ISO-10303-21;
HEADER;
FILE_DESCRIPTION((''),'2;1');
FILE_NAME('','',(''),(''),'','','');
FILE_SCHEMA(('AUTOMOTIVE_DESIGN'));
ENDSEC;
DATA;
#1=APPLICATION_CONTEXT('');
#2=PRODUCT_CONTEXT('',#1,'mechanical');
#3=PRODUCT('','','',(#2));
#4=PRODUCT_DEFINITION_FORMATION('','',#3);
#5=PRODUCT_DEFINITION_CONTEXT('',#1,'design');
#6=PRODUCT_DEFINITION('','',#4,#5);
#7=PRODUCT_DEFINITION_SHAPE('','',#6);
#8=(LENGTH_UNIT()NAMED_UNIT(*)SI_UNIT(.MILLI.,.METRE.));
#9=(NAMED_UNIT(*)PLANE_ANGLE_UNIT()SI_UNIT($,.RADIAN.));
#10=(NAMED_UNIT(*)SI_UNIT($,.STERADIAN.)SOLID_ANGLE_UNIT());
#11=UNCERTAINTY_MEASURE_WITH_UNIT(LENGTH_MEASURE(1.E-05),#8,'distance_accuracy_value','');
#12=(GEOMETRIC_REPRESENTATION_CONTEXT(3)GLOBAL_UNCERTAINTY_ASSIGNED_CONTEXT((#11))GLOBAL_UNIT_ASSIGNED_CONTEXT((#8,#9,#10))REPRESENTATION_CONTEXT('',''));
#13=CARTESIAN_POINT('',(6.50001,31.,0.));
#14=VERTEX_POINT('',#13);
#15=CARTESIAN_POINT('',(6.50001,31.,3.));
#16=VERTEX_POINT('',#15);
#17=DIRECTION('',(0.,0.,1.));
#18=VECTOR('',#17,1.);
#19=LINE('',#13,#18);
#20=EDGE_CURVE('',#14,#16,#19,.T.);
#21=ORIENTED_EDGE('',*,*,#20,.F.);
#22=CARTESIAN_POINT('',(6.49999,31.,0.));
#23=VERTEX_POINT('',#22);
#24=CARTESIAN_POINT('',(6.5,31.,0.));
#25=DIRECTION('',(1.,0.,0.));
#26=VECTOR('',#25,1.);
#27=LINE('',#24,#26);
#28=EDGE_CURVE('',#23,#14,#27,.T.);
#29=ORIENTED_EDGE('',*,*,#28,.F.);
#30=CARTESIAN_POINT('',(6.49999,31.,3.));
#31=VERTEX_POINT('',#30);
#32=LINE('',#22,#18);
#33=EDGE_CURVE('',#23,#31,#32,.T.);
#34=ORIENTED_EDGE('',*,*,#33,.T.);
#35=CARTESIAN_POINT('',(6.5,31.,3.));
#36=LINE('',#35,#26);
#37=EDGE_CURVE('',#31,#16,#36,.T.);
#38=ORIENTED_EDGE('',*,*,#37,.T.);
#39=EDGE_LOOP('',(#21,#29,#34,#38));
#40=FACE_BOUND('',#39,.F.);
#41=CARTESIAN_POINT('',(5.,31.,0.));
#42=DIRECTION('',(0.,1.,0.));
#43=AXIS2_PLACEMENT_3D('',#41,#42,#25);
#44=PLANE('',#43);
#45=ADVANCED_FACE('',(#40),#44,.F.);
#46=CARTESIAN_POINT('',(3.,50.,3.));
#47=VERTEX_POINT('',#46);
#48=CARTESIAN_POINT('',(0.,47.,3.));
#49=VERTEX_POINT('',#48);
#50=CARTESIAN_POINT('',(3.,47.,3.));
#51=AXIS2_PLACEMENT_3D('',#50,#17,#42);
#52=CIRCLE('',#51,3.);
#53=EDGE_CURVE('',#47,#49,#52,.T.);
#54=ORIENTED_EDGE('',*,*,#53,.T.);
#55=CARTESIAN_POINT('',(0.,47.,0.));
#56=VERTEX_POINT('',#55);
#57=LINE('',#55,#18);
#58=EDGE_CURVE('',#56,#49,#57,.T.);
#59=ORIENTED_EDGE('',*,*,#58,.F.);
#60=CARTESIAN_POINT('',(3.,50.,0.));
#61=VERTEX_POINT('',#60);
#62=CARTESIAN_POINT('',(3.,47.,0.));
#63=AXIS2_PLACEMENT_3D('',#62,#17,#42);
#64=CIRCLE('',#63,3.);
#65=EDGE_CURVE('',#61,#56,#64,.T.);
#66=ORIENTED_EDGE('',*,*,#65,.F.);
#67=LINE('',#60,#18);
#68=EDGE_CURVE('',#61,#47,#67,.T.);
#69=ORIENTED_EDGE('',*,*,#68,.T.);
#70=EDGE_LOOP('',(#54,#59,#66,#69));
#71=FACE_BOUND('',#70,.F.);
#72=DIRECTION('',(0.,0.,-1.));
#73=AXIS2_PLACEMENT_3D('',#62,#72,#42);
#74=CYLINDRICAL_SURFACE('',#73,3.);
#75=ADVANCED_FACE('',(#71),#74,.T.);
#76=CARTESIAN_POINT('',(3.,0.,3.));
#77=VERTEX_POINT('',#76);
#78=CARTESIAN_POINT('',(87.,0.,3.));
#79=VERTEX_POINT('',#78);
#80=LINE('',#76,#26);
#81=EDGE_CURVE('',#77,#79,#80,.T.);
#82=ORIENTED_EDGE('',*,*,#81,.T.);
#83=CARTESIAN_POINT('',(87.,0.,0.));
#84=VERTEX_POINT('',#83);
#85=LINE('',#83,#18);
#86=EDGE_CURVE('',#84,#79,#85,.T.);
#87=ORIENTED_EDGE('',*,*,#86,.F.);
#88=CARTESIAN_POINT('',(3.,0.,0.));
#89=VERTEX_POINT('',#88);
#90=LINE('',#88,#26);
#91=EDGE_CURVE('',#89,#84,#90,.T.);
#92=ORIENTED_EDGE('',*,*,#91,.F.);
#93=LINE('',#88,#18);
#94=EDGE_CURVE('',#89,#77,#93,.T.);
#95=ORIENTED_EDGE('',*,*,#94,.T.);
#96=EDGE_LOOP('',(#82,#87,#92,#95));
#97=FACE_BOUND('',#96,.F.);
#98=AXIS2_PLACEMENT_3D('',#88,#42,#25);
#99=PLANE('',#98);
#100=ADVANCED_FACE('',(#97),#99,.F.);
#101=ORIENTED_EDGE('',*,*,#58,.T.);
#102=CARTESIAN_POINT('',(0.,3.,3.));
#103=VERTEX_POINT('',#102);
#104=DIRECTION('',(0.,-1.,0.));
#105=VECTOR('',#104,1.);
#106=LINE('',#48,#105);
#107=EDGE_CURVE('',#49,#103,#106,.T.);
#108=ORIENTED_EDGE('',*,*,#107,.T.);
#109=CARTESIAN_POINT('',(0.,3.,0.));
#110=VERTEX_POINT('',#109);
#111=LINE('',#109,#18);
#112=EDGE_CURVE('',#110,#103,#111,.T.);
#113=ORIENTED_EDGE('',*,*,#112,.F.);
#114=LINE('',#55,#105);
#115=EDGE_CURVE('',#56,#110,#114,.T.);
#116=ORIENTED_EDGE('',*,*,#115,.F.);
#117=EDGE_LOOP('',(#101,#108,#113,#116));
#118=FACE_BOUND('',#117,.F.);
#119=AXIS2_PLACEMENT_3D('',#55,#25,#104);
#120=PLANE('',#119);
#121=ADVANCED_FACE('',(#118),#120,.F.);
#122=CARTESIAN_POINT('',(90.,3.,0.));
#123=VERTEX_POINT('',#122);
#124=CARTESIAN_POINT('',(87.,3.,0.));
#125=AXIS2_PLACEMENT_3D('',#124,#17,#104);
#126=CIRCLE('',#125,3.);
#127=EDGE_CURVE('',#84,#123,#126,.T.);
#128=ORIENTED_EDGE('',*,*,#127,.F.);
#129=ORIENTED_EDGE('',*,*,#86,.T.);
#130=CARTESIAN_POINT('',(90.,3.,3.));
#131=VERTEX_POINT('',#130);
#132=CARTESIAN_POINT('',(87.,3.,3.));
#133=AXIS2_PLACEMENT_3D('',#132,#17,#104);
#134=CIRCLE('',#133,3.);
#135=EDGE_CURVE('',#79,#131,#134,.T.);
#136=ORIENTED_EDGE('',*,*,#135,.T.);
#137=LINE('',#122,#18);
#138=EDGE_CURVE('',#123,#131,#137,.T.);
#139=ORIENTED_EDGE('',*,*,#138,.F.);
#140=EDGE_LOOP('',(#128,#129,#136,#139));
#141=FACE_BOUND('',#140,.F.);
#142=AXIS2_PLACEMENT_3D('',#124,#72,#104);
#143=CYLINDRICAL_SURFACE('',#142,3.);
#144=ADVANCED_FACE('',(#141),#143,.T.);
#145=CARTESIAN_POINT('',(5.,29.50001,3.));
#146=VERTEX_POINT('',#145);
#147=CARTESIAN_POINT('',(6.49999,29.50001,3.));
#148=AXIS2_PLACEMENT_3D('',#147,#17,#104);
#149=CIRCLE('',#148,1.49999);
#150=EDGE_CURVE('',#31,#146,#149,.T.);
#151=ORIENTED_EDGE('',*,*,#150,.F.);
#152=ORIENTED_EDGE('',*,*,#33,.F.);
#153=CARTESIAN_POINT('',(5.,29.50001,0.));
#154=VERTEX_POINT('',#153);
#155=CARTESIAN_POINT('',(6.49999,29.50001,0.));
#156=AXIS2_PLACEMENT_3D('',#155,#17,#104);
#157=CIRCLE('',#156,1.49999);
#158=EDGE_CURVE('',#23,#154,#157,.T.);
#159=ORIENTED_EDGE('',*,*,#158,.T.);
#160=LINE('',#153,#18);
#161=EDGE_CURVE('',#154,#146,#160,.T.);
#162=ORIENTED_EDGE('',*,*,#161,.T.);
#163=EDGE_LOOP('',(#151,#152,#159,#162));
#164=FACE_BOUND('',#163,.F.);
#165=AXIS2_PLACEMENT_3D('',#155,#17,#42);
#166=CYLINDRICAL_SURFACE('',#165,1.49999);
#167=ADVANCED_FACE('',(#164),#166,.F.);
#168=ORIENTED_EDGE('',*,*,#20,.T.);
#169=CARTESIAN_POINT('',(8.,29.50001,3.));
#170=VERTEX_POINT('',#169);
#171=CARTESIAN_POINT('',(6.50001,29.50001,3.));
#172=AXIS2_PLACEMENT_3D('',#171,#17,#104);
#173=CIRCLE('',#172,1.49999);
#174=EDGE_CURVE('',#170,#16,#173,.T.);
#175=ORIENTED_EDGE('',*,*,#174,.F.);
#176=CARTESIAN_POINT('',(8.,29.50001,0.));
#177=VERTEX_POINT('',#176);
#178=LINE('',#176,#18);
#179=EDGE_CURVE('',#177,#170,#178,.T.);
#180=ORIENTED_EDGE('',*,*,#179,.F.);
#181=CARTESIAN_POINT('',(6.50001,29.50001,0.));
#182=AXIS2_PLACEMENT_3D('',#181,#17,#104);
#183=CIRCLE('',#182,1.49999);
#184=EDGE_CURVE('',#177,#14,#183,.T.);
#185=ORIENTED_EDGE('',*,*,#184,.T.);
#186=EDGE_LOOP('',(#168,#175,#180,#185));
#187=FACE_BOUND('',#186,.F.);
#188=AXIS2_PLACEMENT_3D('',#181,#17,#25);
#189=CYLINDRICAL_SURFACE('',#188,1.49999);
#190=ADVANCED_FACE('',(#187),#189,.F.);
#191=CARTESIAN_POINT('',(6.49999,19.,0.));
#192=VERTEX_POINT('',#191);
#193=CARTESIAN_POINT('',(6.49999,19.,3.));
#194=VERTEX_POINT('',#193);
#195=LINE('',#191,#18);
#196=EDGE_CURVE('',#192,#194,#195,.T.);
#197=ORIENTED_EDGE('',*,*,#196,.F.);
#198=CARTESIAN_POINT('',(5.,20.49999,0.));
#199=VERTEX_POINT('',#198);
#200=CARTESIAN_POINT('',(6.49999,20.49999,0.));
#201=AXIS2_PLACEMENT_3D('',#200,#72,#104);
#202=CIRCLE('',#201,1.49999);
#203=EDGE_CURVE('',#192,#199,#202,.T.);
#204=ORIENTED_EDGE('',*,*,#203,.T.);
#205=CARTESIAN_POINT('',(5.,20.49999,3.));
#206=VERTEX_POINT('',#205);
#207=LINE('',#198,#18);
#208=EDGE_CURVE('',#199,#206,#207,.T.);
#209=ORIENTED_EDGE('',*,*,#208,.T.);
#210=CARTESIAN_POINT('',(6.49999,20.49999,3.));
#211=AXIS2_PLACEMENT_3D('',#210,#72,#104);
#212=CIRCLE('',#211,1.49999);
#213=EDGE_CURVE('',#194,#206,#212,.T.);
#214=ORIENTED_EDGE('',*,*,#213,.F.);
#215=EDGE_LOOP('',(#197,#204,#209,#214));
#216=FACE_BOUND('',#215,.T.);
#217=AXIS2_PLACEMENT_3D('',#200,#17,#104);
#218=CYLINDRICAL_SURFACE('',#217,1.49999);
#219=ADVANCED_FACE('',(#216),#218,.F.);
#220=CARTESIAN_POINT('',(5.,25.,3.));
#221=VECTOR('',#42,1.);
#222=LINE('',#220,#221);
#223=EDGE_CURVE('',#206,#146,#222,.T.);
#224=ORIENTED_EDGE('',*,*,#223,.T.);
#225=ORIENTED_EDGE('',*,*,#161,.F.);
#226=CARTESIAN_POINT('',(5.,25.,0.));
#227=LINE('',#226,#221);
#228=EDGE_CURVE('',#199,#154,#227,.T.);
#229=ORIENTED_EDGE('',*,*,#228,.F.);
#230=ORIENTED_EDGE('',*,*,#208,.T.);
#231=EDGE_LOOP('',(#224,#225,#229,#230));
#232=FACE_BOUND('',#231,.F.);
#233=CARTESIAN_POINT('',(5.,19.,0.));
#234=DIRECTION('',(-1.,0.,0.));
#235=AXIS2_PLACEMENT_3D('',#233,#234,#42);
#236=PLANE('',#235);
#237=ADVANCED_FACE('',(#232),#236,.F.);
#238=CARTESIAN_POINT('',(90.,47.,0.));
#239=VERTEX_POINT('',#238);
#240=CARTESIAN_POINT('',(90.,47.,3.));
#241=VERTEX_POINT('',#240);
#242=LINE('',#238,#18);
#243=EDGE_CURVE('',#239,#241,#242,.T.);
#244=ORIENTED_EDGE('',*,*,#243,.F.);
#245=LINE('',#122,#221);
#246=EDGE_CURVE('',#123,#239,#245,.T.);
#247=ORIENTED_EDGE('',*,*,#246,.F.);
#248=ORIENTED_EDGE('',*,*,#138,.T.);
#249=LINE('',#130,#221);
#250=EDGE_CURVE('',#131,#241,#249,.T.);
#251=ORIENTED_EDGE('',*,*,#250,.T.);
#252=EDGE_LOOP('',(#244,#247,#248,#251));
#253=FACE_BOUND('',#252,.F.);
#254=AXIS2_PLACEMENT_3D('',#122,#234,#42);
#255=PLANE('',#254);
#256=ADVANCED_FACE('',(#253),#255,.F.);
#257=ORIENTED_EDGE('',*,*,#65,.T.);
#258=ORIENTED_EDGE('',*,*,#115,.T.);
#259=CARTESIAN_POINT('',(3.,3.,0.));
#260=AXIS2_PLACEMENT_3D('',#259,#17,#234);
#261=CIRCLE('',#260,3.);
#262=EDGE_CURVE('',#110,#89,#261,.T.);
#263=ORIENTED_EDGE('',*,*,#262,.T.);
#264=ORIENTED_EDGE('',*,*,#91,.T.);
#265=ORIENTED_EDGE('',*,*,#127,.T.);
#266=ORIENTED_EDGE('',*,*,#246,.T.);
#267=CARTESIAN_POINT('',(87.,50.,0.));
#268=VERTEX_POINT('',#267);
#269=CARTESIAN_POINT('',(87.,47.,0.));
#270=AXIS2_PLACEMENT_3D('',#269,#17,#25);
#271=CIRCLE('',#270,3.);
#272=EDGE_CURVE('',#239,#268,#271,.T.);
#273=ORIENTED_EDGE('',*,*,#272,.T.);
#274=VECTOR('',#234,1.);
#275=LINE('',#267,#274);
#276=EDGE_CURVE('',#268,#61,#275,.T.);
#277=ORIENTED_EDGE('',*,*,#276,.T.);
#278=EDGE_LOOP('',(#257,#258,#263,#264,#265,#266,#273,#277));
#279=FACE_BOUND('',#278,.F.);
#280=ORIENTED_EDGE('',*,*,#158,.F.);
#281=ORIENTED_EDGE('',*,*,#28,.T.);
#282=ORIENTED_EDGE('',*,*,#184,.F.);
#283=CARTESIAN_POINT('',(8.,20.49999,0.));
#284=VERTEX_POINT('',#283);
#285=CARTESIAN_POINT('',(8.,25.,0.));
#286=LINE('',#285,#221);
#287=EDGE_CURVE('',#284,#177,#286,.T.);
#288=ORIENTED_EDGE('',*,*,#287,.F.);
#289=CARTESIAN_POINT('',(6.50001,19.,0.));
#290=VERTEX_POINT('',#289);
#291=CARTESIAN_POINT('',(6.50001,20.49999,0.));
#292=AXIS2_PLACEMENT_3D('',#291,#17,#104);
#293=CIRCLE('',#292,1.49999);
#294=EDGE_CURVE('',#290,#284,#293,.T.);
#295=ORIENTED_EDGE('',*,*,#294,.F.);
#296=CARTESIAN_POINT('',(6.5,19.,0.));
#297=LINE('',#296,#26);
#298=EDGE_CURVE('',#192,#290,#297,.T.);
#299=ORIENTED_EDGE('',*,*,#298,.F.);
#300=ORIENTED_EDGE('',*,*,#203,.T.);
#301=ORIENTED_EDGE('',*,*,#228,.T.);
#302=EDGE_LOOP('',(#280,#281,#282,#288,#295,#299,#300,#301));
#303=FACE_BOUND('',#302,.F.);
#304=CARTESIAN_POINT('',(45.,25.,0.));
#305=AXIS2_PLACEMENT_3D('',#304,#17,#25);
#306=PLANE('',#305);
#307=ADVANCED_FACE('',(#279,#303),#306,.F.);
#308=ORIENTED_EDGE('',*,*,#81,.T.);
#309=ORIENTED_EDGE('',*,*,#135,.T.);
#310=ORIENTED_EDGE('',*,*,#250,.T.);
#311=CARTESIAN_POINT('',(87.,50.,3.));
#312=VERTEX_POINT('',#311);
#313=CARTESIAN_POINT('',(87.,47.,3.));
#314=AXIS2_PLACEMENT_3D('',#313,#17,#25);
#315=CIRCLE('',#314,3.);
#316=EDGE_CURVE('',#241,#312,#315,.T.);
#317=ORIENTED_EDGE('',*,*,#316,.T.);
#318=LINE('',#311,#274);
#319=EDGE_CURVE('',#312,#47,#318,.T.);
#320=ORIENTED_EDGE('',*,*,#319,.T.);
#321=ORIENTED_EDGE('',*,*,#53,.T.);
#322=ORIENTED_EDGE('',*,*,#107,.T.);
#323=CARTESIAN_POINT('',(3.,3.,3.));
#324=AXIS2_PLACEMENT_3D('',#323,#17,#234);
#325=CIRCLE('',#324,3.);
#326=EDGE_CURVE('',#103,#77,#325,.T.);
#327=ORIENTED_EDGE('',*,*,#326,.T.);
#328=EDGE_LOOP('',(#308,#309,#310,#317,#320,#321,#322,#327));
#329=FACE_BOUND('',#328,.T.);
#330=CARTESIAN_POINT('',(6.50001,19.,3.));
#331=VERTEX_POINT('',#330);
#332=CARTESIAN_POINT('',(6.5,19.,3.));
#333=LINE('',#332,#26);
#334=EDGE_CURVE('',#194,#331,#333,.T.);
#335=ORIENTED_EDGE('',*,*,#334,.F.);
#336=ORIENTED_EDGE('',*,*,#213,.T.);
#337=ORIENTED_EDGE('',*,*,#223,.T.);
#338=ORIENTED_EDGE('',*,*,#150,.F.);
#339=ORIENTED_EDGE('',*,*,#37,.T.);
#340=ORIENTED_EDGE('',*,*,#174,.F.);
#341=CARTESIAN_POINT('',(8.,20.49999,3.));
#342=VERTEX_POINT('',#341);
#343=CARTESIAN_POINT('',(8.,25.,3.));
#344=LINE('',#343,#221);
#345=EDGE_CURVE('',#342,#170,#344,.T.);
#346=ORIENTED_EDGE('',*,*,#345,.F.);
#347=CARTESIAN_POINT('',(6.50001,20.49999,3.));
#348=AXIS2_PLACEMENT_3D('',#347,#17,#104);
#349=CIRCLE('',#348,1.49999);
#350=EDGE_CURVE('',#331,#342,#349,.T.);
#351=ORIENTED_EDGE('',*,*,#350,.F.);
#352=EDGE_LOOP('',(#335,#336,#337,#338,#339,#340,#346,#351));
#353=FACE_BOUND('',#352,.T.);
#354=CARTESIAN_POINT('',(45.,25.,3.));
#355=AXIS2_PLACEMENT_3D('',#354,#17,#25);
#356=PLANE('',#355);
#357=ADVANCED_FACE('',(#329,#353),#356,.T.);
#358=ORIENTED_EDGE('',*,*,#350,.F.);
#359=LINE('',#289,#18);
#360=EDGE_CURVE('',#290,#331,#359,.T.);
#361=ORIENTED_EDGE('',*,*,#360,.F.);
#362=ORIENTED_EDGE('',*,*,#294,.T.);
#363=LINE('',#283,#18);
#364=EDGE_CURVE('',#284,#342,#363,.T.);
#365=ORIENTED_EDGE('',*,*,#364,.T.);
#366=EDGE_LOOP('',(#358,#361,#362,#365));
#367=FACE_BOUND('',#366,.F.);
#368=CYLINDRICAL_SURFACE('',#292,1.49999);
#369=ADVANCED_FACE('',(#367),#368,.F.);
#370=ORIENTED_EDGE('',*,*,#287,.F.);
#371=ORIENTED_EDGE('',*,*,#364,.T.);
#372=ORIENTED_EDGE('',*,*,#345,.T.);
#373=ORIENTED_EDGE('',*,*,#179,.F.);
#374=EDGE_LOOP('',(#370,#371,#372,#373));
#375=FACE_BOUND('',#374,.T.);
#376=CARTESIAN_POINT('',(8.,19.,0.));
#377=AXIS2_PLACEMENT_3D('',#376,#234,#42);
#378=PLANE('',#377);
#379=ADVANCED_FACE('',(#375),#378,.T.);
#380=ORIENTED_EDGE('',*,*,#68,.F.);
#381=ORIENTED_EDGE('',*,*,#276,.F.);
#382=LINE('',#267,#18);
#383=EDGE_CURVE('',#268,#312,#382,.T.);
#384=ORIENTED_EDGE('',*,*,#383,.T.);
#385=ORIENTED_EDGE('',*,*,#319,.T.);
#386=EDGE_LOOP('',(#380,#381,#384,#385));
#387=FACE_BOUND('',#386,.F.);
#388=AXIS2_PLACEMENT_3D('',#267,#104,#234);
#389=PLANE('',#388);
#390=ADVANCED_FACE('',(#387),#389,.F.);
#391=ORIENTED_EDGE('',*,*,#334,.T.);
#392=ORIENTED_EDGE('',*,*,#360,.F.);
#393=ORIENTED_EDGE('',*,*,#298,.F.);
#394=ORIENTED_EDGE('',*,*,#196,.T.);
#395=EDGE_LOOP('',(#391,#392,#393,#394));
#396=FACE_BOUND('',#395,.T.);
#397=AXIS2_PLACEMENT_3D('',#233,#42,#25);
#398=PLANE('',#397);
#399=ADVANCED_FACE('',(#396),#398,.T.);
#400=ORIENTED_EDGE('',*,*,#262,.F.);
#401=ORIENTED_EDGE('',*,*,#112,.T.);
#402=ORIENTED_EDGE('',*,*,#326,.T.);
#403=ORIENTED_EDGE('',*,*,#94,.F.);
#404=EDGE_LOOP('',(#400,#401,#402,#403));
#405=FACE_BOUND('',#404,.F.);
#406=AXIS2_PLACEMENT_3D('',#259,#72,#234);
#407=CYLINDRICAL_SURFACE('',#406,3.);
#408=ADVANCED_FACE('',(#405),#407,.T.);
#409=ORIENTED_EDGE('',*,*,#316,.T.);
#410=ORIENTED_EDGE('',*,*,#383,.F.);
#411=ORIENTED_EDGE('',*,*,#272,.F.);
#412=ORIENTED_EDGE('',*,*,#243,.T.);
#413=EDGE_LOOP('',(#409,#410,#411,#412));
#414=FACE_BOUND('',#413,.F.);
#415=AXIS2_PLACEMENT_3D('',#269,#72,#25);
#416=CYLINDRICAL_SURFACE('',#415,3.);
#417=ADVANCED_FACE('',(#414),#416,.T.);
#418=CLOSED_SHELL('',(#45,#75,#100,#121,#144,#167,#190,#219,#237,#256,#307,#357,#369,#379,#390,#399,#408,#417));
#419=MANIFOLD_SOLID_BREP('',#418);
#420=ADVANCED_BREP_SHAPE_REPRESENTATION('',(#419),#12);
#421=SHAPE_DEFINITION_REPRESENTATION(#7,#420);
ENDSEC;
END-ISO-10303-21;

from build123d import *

# Parameters (mm, degrees)
F0_W     = 3
F0_H     = 12
F1_DEPTH = 3
F2_R     = 1.49999


# Not quite as in the source:
# - a fillet or chamfer is up to 0.001 mm smaller than in the source, because OpenCascade refuses the exact size
# - a feature of the source that left no trace in its solid (it failed there, or was rolled back) is left out


with BuildPart() as f1:
    # F0 (on Top) → F1 (new body)
    with BuildSketch(Plane.XY):
        with BuildLine():
            ThreePointArc((0, 3), (0.8786796564, 0.8786796564), (3, 0))
            Line((3, 0), (87, 0))
            ThreePointArc((87, 0), (89.1213203436, 0.8786796564), (90, 3))
            Line((90, 3), (90, 47))
            ThreePointArc((90, 47), (89.1213203436, 49.1213203436), (87, 50))
            Line((87, 50), (3, 50))
            ThreePointArc((3, 50), (0.8786796564, 49.1213203436), (0, 47))
            Line((0, 47), (0, 3))
        make_face()
        with Locations((6.5, 25)):
            Rectangle(F0_W, F0_H, mode=Mode.SUBTRACT)
    extrude(amount=F1_DEPTH)

    # F2 (radius 1.5 in the source; OpenCascade refuses exactly that, so slightly less here)
    f2_edges = [f1.edges().sort_by_distance(p)[0] for p in [
        (5, 31, 1.5),
        (8, 31, 1.5),
        (5, 19, 1.5),
        (8, 19, 1.5),
    ]]
    fillet(f2_edges, radius=F2_R)


solid = f1.part
